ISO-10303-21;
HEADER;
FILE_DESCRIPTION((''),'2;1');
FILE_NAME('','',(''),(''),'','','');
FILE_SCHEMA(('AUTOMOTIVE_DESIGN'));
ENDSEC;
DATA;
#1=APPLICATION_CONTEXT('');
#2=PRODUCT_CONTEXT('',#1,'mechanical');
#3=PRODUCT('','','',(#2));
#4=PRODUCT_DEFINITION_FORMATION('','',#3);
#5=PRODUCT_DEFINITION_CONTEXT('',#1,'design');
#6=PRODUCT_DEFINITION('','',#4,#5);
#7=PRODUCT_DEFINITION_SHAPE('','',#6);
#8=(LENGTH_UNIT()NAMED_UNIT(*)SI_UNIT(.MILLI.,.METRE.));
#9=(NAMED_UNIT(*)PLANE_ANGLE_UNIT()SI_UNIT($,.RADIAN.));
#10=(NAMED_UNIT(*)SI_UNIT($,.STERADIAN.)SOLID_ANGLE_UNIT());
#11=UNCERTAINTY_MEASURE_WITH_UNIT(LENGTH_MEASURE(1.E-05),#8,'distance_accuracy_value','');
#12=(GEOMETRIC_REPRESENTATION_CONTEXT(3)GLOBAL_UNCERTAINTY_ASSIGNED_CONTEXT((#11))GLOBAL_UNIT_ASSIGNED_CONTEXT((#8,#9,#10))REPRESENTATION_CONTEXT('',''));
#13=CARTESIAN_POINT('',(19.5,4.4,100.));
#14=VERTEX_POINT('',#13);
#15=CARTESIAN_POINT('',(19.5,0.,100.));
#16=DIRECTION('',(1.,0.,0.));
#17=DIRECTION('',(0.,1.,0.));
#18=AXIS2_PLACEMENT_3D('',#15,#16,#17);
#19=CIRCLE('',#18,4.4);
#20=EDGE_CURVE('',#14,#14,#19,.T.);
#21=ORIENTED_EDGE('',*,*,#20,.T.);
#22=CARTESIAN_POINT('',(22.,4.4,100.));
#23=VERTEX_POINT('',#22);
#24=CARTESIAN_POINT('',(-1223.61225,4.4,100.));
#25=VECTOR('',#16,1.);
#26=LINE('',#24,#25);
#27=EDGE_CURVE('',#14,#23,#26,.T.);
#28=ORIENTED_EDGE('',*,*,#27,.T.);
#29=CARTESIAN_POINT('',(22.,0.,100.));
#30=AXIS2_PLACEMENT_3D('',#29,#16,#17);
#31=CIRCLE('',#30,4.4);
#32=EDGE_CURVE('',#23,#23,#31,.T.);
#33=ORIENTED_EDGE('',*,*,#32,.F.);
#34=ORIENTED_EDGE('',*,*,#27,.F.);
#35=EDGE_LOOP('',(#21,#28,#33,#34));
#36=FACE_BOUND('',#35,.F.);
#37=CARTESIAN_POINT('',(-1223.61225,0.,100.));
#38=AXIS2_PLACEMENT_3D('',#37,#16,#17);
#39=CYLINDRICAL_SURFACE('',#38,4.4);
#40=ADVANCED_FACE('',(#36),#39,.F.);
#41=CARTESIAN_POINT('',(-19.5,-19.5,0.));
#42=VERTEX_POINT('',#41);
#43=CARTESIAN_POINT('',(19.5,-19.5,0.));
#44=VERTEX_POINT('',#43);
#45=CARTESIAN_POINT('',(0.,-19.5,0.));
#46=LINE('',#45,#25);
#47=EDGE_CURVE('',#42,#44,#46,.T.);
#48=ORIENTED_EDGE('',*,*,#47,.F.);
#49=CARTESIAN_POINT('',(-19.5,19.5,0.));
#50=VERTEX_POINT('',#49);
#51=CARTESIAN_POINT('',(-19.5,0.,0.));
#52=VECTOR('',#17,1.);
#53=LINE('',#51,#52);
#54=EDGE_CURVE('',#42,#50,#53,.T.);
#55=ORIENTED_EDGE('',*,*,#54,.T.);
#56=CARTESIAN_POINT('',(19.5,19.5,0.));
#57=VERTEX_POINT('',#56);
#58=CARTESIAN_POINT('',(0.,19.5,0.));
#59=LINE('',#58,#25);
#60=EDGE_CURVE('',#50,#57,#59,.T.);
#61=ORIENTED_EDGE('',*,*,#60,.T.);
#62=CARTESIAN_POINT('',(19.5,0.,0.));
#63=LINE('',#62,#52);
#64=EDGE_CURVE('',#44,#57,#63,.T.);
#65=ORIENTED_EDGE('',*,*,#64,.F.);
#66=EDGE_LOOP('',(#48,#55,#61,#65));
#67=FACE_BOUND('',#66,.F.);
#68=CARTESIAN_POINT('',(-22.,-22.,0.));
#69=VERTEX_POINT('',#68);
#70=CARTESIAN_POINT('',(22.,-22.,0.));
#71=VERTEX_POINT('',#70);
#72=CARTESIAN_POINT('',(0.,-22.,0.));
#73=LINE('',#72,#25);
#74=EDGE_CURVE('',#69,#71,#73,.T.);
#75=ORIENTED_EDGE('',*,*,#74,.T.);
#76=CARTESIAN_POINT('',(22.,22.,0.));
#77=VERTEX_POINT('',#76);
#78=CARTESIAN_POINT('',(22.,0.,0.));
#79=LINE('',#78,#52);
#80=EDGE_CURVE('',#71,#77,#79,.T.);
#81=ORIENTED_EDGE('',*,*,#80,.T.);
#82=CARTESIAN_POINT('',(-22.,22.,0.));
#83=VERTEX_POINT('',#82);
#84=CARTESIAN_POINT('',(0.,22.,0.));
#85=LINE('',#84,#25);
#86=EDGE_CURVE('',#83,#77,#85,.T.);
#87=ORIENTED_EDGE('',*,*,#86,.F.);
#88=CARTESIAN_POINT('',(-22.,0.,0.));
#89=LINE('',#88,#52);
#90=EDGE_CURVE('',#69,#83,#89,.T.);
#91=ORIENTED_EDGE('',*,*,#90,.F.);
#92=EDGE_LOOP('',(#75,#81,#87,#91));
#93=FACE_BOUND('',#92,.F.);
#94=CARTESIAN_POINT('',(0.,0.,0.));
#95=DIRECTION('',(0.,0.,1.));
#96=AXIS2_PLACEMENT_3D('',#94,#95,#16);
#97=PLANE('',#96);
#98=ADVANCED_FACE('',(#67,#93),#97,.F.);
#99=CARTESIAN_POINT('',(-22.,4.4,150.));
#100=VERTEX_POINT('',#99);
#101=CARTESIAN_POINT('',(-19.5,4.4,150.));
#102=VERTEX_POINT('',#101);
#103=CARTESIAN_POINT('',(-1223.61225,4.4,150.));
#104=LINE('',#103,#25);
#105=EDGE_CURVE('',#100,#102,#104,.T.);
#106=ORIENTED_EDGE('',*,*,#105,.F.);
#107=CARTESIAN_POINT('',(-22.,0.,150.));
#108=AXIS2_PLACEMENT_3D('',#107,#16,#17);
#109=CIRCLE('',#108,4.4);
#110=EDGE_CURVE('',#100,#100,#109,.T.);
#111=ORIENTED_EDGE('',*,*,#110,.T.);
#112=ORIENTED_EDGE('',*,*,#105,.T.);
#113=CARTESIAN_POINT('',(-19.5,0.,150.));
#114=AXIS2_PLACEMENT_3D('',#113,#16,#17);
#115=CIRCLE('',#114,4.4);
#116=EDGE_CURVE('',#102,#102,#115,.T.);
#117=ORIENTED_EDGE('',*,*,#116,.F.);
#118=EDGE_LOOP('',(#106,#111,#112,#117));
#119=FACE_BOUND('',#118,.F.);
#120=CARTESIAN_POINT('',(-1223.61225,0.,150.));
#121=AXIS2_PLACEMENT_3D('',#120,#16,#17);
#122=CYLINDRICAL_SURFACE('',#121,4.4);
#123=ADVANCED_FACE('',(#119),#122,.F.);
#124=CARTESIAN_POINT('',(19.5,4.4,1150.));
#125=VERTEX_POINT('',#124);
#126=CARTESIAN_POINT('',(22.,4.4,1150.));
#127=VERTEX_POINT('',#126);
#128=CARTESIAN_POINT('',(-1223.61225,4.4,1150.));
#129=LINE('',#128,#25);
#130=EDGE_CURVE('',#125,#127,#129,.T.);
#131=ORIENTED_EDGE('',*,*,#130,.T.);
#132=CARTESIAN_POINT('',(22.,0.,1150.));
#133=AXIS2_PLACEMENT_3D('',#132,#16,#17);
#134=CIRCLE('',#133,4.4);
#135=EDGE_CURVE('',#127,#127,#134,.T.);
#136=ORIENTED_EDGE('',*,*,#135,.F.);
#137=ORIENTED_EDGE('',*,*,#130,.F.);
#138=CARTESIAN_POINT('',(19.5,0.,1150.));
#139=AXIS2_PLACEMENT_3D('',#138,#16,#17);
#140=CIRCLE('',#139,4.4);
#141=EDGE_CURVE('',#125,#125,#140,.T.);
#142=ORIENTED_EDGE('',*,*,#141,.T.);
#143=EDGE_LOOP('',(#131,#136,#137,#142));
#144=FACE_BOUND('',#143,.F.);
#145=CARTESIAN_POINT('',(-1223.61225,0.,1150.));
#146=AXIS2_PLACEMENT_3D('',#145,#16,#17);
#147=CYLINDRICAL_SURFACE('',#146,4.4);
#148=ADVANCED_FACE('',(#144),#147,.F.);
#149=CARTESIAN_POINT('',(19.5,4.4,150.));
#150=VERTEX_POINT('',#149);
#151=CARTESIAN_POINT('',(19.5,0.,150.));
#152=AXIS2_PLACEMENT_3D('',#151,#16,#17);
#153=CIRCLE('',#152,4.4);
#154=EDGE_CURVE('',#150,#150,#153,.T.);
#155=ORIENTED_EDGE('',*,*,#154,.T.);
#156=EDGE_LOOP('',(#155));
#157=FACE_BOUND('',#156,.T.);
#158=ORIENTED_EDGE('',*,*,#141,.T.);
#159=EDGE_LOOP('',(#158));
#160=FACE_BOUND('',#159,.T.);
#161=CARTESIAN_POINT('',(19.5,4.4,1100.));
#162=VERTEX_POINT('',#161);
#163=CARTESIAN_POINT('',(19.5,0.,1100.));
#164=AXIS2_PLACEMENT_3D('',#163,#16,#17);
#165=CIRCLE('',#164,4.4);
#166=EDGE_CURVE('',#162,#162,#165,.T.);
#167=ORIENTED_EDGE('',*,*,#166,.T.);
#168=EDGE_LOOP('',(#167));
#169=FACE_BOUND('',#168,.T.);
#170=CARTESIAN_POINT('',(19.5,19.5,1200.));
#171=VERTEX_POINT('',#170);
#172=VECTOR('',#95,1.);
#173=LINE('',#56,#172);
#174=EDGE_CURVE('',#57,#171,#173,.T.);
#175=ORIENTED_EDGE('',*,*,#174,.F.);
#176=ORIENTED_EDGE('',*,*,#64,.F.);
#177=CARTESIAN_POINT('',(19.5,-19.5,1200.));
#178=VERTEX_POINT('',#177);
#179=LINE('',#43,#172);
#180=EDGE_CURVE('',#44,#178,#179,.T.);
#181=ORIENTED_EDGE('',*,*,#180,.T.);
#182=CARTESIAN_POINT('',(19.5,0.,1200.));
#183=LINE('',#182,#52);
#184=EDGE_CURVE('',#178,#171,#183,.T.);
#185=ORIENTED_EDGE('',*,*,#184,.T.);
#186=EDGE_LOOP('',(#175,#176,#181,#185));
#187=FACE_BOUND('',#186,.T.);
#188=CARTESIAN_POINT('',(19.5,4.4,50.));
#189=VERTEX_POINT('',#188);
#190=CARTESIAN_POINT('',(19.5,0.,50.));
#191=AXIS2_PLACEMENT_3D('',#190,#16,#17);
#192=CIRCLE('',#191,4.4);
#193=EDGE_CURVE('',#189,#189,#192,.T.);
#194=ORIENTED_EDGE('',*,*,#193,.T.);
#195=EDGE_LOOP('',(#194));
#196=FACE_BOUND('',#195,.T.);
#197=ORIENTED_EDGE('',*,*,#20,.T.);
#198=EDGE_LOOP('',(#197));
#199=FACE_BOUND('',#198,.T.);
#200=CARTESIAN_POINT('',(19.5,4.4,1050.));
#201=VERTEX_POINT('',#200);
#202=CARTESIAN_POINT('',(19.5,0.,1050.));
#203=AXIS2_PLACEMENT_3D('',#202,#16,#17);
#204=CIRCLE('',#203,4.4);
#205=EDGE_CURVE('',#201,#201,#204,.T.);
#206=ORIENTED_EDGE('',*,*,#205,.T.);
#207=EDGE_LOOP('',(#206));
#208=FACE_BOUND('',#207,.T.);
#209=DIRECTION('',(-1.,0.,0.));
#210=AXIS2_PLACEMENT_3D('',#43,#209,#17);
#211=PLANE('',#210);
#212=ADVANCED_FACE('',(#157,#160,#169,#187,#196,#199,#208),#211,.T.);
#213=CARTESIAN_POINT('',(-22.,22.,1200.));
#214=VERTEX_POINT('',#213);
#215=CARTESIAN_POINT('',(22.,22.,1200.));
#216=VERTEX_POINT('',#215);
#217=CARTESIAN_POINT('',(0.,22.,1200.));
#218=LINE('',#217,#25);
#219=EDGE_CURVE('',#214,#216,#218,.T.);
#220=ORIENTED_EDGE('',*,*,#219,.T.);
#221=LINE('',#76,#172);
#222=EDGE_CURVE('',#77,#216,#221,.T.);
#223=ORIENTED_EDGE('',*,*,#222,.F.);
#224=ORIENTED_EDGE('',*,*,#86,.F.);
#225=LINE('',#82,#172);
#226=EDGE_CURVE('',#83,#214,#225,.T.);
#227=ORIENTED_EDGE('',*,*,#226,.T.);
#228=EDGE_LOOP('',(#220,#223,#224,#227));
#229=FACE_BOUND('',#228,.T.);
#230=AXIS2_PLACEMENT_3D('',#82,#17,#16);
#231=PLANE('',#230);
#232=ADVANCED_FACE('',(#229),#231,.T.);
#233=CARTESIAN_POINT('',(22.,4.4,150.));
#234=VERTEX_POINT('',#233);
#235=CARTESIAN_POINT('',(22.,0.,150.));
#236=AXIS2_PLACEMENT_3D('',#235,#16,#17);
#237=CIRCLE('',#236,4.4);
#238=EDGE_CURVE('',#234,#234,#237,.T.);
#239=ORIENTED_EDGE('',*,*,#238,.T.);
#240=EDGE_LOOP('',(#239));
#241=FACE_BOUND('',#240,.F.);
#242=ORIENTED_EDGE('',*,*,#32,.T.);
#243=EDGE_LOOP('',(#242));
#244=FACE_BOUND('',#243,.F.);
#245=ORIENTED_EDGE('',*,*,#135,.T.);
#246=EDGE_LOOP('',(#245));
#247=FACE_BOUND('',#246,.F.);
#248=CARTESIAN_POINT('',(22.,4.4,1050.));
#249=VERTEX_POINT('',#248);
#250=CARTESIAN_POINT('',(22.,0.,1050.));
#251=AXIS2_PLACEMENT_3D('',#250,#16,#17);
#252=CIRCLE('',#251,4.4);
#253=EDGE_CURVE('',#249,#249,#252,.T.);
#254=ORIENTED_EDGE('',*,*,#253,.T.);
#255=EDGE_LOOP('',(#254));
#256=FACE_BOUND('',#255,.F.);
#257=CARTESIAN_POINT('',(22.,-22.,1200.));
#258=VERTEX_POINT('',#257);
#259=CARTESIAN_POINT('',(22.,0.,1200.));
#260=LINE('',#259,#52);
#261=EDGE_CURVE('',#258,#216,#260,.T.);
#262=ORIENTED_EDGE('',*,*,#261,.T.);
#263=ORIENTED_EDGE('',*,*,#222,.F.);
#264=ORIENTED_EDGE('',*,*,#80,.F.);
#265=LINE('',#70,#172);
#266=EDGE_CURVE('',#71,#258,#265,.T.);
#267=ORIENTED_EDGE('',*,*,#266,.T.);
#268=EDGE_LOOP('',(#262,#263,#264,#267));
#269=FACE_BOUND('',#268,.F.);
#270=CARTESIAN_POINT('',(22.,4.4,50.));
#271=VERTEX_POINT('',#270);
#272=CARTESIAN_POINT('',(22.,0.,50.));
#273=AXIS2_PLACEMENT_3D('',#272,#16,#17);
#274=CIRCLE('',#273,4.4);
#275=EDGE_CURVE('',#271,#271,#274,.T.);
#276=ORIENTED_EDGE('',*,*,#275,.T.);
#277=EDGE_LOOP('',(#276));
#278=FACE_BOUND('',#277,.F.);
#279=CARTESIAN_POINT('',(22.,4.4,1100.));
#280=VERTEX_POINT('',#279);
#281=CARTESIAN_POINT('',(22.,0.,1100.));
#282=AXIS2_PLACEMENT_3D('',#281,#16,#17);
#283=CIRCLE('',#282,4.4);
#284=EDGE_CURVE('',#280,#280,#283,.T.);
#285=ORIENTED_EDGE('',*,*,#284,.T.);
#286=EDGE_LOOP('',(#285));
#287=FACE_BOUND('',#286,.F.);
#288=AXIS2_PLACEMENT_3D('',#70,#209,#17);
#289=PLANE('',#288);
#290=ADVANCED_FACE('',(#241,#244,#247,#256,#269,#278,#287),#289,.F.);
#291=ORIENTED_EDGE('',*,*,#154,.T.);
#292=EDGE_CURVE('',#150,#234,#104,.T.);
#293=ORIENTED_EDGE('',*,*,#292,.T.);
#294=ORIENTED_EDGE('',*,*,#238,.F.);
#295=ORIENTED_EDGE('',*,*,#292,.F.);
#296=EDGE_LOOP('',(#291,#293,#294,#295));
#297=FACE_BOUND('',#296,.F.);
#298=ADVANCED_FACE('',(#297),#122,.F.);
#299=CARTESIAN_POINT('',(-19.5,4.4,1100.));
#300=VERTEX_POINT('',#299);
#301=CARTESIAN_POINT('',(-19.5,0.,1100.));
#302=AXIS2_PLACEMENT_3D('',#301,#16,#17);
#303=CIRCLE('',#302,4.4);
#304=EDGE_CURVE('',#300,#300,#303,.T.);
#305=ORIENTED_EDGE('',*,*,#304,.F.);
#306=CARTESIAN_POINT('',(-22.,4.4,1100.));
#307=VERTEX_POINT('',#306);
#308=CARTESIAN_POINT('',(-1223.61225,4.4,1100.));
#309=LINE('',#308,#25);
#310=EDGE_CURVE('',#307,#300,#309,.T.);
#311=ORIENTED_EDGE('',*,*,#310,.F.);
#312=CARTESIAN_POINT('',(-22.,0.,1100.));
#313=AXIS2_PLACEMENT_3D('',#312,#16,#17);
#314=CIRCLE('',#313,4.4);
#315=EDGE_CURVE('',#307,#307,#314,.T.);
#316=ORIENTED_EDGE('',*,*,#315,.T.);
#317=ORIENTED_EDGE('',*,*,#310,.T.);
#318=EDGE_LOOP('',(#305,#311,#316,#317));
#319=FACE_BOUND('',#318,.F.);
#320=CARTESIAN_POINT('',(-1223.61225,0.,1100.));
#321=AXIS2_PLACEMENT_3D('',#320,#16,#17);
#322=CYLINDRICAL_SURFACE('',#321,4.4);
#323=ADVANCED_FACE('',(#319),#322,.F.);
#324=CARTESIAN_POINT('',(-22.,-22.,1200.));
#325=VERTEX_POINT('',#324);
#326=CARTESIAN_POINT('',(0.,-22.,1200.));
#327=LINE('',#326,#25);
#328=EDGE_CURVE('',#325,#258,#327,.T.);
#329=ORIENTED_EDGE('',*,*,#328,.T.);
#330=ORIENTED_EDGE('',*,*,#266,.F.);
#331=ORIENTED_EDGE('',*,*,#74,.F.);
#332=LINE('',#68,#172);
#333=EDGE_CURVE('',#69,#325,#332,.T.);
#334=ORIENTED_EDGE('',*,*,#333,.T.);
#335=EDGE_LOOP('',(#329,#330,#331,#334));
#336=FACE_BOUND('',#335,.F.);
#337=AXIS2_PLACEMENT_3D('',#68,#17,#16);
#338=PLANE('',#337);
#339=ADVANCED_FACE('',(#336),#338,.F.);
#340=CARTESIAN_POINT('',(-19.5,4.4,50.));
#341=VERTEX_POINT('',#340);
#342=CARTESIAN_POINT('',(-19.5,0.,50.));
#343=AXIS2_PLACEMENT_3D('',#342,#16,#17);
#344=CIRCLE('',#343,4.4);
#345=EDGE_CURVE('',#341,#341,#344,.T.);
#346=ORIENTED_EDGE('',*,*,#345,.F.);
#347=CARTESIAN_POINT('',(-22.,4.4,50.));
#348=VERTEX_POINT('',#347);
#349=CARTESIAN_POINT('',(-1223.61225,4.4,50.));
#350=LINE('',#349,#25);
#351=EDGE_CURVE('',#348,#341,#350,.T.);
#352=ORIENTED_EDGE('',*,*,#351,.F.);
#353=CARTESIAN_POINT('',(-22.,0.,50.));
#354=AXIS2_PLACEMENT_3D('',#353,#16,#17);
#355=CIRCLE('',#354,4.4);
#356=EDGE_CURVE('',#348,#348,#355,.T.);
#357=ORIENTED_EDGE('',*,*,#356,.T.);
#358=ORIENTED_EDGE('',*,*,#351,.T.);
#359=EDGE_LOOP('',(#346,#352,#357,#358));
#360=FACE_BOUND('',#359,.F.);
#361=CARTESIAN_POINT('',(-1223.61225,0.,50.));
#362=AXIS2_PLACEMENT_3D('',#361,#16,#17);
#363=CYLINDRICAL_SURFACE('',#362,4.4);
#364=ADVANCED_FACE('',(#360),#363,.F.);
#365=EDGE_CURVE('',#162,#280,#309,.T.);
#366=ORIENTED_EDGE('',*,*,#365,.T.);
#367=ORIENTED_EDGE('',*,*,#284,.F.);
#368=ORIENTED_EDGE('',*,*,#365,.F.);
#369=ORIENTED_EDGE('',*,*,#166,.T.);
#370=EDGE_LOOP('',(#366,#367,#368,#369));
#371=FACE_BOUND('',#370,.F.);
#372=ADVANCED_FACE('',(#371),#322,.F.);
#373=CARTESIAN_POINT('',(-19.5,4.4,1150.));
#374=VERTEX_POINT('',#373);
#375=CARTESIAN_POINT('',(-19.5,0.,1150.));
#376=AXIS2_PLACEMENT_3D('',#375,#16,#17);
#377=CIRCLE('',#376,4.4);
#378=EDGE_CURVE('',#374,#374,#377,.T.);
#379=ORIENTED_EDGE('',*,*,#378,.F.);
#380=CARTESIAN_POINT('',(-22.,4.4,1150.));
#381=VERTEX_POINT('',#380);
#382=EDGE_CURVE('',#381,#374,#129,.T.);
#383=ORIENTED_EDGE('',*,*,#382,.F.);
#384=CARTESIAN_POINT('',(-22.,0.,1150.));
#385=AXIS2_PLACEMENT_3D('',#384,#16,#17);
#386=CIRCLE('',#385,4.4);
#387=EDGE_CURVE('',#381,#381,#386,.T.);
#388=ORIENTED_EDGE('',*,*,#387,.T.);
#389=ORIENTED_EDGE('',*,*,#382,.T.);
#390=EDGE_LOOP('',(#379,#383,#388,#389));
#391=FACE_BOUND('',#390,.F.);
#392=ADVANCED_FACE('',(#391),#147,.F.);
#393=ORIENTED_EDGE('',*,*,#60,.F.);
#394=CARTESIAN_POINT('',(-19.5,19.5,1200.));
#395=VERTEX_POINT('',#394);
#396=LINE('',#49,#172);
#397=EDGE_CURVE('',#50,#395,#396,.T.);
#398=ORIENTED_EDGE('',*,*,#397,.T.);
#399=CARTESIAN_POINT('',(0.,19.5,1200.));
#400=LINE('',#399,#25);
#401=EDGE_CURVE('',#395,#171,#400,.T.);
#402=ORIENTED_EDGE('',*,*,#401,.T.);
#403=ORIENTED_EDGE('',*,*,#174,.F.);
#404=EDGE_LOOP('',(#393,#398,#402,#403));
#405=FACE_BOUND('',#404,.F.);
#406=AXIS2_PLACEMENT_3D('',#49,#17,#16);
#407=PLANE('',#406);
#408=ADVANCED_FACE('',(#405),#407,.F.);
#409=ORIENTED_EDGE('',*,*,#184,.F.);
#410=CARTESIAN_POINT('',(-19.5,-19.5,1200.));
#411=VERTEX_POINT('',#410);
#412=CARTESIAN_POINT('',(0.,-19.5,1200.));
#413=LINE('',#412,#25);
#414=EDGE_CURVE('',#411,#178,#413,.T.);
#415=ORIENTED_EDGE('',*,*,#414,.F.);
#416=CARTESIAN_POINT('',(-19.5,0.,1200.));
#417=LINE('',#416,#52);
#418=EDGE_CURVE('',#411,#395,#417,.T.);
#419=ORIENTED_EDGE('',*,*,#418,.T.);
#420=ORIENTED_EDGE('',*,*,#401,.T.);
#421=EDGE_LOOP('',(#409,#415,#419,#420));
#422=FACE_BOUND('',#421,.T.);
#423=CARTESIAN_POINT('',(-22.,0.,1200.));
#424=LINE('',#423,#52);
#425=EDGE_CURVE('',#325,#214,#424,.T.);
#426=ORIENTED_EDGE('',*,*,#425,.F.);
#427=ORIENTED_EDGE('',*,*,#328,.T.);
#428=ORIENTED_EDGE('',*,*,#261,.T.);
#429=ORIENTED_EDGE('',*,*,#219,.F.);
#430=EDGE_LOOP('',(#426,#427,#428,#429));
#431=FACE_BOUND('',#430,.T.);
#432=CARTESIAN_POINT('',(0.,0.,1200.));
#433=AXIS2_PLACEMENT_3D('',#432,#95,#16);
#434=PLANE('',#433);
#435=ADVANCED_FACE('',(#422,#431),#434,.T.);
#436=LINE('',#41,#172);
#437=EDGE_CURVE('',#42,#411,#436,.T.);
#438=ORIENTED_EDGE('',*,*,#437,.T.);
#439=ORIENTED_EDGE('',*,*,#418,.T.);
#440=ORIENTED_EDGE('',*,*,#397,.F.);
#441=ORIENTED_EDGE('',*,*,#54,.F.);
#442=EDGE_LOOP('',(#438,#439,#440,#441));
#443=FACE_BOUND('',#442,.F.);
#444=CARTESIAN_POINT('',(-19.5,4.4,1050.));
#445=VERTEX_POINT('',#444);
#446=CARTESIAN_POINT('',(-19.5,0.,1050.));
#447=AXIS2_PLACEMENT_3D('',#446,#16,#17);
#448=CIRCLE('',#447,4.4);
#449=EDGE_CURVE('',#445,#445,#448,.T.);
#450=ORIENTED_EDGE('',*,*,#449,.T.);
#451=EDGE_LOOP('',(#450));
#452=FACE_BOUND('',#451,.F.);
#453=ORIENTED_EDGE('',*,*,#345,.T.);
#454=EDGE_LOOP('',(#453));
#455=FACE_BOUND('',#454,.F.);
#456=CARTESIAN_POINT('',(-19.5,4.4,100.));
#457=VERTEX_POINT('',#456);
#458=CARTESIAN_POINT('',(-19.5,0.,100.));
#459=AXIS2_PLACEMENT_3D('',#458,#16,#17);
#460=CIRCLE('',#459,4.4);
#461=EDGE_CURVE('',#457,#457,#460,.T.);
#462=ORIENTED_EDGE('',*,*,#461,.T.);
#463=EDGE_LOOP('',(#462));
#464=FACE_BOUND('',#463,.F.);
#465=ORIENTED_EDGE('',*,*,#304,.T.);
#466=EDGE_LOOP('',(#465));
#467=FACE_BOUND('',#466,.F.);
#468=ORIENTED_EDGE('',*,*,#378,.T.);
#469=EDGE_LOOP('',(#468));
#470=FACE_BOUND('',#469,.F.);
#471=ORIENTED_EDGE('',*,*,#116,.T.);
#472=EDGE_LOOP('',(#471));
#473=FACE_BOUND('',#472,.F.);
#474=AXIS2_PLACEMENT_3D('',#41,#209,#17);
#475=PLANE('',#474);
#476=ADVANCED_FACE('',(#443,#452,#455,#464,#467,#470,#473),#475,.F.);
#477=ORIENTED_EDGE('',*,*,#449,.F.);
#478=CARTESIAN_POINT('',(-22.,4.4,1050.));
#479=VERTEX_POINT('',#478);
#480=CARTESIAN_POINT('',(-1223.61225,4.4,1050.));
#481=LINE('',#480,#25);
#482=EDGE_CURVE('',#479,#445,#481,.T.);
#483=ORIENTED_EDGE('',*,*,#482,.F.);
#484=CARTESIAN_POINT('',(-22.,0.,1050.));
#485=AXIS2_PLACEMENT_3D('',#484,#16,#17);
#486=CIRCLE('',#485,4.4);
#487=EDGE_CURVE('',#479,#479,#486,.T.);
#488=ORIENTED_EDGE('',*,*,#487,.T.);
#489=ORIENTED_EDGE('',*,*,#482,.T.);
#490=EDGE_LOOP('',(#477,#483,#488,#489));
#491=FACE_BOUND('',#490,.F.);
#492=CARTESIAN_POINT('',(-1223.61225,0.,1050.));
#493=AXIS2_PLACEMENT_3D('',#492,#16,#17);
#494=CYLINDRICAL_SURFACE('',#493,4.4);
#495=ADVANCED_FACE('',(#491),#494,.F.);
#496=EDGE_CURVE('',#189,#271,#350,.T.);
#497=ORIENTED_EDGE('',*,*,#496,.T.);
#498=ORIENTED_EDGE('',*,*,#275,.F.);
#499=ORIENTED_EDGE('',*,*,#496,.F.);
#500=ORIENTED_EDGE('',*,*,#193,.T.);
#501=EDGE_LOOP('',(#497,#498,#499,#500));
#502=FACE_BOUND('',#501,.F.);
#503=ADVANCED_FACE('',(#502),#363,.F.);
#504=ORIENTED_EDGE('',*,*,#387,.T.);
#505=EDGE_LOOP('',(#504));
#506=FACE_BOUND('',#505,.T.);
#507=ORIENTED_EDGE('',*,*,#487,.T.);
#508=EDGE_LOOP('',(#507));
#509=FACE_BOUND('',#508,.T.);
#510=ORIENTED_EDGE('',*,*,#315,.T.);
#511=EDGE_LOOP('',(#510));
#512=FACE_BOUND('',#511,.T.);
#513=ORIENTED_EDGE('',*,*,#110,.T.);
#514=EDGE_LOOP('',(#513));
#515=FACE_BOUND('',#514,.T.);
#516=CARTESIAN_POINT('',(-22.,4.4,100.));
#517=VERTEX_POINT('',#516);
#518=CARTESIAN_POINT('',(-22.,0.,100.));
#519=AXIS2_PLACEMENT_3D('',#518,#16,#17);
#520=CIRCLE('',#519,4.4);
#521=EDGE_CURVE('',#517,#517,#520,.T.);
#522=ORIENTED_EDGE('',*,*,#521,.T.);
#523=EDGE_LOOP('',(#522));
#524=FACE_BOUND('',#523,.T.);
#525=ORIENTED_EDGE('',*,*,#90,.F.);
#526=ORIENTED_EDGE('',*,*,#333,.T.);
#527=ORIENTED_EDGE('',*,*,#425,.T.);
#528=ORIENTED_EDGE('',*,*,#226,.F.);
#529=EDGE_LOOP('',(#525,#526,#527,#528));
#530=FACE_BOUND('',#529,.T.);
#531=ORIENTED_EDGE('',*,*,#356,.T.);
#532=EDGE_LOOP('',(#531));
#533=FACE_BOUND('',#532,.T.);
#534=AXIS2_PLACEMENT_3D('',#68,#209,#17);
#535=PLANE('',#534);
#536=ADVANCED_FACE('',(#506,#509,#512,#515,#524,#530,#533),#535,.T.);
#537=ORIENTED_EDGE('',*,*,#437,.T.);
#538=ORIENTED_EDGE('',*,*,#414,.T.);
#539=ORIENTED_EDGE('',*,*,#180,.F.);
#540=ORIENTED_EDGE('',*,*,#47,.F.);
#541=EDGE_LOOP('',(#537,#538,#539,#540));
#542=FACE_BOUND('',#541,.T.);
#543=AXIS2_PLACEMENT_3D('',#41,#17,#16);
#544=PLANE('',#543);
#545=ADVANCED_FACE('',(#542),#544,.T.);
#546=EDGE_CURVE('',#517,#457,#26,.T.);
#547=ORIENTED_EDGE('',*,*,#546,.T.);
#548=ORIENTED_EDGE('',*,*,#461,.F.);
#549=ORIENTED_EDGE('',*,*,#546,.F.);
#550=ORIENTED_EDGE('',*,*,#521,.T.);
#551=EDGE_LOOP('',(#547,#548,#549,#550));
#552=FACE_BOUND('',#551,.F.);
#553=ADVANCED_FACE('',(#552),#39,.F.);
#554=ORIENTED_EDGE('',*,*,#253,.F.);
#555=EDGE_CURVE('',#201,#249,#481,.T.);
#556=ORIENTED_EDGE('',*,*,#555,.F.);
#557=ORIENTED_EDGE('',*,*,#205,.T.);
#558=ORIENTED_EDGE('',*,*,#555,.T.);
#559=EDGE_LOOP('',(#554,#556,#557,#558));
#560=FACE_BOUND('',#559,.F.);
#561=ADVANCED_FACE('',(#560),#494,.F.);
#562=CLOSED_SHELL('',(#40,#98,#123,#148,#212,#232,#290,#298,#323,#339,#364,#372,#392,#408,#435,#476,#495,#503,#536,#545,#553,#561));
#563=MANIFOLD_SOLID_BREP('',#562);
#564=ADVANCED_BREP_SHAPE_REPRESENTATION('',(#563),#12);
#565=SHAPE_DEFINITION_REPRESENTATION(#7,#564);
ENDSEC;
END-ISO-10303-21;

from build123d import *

# Parameters (mm, degrees)
F0_W     = 44
F0_H     = 44
F0_W_2   = 39
F0_H_2   = 39
F1_DEPTH = 1200
F3_D     = 8.8


# Not quite as in the source:
# - a feature names something its author has since deleted; it is built from what else it names


with BuildPart() as f1:
    # F0 (on Top) → F1 (new body)
    with BuildSketch(Plane.XY):
        Rectangle(F0_W, F0_H)
        Rectangle(F0_W_2, F0_H_2, mode=Mode.SUBTRACT)
    extrude(amount=F1_DEPTH)

    # F3 (through all)
    with Locations(Plane(origin=(-22, 0, 0), x_dir=(0, -1, 0), z_dir=(-1, 0, 0))):
        with Locations((0, 150), (0, 100), (0, 50), (0, 1050), (0, 1150), (0, 1100)):
            Hole(F3_D / 2)


solid = f1.part
